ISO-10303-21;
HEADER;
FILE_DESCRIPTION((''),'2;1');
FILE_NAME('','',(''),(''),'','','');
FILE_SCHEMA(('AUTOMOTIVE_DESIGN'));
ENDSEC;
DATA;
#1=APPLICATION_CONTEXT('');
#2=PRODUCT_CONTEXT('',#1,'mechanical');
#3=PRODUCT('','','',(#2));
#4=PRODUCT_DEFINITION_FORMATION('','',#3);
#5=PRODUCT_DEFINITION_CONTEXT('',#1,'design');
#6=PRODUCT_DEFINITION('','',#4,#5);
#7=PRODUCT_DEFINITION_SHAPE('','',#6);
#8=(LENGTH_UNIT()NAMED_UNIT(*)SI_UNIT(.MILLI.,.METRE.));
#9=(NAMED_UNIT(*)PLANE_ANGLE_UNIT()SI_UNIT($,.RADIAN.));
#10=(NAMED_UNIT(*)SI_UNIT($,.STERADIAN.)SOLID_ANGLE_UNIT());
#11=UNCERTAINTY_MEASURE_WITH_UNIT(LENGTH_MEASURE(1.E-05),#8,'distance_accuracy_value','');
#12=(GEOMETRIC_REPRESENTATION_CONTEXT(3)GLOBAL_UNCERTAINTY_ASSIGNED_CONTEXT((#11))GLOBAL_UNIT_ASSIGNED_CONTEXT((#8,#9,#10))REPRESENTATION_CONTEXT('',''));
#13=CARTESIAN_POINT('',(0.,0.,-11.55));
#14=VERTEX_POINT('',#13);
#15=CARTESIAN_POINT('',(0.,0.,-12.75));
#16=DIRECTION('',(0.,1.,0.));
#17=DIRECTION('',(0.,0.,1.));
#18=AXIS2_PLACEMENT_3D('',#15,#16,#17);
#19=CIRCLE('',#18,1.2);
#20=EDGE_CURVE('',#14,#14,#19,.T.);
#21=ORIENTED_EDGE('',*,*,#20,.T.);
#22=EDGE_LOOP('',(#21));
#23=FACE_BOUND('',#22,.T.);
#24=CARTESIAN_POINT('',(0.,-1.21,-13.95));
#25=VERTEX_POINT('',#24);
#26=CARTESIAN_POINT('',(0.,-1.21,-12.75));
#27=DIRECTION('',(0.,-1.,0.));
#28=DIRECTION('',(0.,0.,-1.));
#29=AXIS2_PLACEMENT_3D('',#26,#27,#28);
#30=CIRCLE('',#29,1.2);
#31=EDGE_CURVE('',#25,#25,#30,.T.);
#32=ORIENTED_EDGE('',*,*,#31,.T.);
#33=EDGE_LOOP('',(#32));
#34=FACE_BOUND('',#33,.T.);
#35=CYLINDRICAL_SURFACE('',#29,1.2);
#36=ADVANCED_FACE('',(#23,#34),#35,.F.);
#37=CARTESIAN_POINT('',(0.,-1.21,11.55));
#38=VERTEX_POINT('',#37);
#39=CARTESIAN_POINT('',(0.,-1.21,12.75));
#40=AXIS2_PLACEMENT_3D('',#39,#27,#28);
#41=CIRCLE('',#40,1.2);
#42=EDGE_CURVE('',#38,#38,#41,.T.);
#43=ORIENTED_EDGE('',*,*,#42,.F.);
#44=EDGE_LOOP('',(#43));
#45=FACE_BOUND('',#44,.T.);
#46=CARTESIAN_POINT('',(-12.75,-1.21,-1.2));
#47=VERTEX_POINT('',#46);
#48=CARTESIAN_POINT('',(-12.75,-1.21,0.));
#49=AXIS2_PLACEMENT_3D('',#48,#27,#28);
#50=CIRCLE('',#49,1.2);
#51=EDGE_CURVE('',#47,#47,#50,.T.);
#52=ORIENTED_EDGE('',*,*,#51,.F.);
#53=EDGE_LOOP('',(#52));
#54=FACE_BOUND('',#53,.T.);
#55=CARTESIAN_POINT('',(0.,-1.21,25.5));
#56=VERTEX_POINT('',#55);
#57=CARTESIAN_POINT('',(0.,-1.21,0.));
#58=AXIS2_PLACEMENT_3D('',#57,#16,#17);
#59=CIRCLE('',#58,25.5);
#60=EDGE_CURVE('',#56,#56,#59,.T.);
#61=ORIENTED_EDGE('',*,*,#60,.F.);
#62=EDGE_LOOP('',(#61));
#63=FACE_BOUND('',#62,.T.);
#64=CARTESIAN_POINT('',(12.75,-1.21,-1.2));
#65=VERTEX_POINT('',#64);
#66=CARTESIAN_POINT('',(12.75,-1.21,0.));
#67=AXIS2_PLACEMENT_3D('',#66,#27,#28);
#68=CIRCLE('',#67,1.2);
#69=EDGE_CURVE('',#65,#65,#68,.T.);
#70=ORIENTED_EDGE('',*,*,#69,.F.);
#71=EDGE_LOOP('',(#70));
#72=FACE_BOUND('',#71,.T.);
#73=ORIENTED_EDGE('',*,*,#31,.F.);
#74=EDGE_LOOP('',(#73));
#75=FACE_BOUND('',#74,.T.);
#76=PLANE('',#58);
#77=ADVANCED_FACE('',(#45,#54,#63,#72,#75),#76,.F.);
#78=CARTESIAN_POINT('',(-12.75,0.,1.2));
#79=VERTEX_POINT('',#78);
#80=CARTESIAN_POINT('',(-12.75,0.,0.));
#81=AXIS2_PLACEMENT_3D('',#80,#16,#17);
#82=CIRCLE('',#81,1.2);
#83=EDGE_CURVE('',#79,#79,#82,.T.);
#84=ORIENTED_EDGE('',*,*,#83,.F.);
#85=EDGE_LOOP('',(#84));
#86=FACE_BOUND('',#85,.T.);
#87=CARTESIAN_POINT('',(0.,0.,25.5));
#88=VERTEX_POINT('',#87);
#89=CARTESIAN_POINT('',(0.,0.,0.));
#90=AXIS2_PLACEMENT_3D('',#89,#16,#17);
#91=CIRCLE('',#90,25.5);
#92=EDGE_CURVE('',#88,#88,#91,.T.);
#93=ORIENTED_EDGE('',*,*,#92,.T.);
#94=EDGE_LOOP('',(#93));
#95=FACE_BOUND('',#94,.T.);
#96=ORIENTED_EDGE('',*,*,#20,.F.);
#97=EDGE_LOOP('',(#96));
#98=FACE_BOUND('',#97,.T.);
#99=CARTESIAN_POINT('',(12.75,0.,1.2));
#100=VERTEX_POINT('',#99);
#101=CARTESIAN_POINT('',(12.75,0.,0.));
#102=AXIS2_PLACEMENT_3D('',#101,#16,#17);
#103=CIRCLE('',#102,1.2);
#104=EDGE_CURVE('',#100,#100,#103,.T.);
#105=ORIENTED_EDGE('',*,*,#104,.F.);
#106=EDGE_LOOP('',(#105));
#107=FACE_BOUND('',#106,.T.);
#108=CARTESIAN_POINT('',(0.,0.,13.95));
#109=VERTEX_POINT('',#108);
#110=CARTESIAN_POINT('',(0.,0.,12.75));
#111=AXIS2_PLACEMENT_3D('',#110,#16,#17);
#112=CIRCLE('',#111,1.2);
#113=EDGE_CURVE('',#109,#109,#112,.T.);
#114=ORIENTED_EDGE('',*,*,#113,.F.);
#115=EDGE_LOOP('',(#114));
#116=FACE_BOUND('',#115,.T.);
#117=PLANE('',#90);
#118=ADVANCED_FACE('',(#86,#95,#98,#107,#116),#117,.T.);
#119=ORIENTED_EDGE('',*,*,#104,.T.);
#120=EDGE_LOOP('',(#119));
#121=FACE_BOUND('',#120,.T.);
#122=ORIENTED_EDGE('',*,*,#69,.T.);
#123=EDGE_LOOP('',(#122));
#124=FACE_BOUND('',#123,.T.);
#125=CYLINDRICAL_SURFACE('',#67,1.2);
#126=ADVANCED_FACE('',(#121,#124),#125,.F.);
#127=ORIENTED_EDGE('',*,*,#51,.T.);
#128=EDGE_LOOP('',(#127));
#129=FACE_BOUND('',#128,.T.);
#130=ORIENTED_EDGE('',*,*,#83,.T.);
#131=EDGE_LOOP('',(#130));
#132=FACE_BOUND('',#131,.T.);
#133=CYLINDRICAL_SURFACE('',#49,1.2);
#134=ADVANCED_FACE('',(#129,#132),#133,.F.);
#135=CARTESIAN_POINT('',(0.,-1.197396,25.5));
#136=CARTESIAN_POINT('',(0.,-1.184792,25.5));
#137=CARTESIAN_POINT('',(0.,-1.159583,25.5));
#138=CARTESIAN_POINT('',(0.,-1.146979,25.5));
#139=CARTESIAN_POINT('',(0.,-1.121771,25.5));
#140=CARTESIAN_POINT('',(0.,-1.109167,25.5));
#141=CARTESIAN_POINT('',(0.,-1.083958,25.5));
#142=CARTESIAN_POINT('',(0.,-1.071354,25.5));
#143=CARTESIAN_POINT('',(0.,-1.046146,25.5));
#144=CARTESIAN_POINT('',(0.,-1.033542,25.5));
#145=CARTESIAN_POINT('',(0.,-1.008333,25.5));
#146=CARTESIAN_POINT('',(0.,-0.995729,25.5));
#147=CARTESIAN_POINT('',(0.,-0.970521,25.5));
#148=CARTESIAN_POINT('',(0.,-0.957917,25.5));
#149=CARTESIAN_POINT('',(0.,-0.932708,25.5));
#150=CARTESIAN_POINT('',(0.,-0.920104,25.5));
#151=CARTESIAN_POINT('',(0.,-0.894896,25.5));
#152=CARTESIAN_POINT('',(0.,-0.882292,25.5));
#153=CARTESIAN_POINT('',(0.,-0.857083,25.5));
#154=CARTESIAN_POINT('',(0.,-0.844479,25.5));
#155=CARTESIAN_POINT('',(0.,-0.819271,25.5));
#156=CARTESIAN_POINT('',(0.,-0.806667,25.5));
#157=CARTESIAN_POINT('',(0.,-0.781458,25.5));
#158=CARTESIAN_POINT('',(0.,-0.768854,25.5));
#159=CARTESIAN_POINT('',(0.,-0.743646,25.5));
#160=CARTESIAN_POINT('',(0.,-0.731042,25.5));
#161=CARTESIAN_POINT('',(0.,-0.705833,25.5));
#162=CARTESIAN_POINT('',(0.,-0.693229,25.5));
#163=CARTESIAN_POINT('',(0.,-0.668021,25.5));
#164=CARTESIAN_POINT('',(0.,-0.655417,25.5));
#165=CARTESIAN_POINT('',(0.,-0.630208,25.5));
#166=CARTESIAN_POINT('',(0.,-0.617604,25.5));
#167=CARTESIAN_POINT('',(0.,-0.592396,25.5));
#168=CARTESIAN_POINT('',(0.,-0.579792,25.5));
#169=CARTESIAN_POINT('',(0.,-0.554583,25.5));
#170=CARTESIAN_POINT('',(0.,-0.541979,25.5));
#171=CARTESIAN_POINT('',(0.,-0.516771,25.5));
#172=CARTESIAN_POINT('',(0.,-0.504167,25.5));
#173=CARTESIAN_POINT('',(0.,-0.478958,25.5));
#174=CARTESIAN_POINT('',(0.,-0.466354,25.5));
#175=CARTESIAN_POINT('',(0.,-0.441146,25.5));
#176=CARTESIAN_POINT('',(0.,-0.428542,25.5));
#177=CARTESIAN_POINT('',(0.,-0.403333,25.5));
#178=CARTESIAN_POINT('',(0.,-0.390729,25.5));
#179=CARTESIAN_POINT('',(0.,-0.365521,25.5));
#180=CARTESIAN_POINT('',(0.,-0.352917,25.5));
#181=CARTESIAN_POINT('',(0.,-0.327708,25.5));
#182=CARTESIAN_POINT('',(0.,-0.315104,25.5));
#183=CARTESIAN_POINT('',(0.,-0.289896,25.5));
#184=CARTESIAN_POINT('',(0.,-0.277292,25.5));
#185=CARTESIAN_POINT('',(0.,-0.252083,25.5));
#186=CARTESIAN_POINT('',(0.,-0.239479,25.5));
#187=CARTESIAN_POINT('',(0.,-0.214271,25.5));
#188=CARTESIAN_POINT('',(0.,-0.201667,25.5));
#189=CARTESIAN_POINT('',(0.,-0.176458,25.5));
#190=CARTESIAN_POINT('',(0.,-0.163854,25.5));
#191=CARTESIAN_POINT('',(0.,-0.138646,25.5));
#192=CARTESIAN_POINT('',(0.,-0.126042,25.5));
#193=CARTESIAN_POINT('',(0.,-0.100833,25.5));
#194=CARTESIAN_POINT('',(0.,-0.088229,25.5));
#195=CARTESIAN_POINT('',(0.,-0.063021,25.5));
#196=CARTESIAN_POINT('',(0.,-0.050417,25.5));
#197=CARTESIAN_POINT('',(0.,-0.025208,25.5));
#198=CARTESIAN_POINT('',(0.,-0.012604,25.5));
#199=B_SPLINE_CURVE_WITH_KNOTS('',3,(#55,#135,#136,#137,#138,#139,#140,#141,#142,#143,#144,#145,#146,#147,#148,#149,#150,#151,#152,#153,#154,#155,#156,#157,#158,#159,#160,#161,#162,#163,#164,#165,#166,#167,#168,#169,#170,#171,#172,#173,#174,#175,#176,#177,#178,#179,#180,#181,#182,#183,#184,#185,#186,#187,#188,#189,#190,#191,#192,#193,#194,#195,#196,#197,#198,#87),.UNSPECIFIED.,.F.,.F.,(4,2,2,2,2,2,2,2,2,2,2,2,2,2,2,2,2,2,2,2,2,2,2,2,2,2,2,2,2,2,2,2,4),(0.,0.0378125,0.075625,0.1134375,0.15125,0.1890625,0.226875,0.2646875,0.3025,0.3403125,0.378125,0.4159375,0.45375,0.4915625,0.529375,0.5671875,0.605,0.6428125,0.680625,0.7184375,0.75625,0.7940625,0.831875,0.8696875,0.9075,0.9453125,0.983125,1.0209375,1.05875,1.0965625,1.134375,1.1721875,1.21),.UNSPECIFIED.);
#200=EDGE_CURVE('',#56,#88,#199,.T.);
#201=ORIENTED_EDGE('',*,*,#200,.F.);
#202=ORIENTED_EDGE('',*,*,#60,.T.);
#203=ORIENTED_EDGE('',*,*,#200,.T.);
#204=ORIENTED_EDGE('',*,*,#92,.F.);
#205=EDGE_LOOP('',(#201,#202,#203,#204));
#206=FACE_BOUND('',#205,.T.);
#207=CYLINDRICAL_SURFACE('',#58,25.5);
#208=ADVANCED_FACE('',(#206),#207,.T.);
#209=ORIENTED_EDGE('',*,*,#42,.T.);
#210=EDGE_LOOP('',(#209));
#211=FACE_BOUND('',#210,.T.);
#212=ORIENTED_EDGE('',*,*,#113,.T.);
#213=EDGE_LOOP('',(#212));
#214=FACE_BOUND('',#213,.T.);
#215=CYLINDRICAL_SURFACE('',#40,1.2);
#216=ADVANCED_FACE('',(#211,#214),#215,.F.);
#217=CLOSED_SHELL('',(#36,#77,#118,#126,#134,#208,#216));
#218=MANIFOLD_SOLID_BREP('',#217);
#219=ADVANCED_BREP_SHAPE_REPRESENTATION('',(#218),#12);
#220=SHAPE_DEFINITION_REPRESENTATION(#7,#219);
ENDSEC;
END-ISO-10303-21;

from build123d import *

# Parameters (mm, degrees)
SKETCH2_R                = 25.5
BASE_FLANGE1_DEPTH       = 1.21
M2_CLEARANCE_HOLE1_D     = 2.4
M2_CLEARANCE_HOLE1_DEPTH = 10
M2_CLEARANCE_HOLE1_TIP   = 0.721032743


# Sheet-metal steps are written as plain solids
with BuildPart() as part:
    # Sketch2 → Base-Flange1 (new body)
    with BuildSketch(Plane(origin=(0, 0, 0), x_dir=(1, 0, 0), z_dir=(0, 1, 0))):
        with Locations(Location((0, 0, 0), (0, 0, 270))):
            Circle(SKETCH2_R)
    extrude(amount=-BASE_FLANGE1_DEPTH)

    # M2 Clearance Hole1
    with Locations(Plane(origin=(0, -1.21, 0), x_dir=(-1, 0, 0), z_dir=(0, -1, 0))):
        with Locations((0, -12.75), (-12.75, 0), (12.75, 0), (0, 12.75)):
            Hole(M2_CLEARANCE_HOLE1_D / 2, depth=M2_CLEARANCE_HOLE1_DEPTH)
            with Locations((0, 0, -(M2_CLEARANCE_HOLE1_DEPTH + M2_CLEARANCE_HOLE1_TIP / 2))):  # 118° drill point
                Cone(0, M2_CLEARANCE_HOLE1_D / 2, M2_CLEARANCE_HOLE1_TIP, mode=Mode.SUBTRACT)


solid = part.part
